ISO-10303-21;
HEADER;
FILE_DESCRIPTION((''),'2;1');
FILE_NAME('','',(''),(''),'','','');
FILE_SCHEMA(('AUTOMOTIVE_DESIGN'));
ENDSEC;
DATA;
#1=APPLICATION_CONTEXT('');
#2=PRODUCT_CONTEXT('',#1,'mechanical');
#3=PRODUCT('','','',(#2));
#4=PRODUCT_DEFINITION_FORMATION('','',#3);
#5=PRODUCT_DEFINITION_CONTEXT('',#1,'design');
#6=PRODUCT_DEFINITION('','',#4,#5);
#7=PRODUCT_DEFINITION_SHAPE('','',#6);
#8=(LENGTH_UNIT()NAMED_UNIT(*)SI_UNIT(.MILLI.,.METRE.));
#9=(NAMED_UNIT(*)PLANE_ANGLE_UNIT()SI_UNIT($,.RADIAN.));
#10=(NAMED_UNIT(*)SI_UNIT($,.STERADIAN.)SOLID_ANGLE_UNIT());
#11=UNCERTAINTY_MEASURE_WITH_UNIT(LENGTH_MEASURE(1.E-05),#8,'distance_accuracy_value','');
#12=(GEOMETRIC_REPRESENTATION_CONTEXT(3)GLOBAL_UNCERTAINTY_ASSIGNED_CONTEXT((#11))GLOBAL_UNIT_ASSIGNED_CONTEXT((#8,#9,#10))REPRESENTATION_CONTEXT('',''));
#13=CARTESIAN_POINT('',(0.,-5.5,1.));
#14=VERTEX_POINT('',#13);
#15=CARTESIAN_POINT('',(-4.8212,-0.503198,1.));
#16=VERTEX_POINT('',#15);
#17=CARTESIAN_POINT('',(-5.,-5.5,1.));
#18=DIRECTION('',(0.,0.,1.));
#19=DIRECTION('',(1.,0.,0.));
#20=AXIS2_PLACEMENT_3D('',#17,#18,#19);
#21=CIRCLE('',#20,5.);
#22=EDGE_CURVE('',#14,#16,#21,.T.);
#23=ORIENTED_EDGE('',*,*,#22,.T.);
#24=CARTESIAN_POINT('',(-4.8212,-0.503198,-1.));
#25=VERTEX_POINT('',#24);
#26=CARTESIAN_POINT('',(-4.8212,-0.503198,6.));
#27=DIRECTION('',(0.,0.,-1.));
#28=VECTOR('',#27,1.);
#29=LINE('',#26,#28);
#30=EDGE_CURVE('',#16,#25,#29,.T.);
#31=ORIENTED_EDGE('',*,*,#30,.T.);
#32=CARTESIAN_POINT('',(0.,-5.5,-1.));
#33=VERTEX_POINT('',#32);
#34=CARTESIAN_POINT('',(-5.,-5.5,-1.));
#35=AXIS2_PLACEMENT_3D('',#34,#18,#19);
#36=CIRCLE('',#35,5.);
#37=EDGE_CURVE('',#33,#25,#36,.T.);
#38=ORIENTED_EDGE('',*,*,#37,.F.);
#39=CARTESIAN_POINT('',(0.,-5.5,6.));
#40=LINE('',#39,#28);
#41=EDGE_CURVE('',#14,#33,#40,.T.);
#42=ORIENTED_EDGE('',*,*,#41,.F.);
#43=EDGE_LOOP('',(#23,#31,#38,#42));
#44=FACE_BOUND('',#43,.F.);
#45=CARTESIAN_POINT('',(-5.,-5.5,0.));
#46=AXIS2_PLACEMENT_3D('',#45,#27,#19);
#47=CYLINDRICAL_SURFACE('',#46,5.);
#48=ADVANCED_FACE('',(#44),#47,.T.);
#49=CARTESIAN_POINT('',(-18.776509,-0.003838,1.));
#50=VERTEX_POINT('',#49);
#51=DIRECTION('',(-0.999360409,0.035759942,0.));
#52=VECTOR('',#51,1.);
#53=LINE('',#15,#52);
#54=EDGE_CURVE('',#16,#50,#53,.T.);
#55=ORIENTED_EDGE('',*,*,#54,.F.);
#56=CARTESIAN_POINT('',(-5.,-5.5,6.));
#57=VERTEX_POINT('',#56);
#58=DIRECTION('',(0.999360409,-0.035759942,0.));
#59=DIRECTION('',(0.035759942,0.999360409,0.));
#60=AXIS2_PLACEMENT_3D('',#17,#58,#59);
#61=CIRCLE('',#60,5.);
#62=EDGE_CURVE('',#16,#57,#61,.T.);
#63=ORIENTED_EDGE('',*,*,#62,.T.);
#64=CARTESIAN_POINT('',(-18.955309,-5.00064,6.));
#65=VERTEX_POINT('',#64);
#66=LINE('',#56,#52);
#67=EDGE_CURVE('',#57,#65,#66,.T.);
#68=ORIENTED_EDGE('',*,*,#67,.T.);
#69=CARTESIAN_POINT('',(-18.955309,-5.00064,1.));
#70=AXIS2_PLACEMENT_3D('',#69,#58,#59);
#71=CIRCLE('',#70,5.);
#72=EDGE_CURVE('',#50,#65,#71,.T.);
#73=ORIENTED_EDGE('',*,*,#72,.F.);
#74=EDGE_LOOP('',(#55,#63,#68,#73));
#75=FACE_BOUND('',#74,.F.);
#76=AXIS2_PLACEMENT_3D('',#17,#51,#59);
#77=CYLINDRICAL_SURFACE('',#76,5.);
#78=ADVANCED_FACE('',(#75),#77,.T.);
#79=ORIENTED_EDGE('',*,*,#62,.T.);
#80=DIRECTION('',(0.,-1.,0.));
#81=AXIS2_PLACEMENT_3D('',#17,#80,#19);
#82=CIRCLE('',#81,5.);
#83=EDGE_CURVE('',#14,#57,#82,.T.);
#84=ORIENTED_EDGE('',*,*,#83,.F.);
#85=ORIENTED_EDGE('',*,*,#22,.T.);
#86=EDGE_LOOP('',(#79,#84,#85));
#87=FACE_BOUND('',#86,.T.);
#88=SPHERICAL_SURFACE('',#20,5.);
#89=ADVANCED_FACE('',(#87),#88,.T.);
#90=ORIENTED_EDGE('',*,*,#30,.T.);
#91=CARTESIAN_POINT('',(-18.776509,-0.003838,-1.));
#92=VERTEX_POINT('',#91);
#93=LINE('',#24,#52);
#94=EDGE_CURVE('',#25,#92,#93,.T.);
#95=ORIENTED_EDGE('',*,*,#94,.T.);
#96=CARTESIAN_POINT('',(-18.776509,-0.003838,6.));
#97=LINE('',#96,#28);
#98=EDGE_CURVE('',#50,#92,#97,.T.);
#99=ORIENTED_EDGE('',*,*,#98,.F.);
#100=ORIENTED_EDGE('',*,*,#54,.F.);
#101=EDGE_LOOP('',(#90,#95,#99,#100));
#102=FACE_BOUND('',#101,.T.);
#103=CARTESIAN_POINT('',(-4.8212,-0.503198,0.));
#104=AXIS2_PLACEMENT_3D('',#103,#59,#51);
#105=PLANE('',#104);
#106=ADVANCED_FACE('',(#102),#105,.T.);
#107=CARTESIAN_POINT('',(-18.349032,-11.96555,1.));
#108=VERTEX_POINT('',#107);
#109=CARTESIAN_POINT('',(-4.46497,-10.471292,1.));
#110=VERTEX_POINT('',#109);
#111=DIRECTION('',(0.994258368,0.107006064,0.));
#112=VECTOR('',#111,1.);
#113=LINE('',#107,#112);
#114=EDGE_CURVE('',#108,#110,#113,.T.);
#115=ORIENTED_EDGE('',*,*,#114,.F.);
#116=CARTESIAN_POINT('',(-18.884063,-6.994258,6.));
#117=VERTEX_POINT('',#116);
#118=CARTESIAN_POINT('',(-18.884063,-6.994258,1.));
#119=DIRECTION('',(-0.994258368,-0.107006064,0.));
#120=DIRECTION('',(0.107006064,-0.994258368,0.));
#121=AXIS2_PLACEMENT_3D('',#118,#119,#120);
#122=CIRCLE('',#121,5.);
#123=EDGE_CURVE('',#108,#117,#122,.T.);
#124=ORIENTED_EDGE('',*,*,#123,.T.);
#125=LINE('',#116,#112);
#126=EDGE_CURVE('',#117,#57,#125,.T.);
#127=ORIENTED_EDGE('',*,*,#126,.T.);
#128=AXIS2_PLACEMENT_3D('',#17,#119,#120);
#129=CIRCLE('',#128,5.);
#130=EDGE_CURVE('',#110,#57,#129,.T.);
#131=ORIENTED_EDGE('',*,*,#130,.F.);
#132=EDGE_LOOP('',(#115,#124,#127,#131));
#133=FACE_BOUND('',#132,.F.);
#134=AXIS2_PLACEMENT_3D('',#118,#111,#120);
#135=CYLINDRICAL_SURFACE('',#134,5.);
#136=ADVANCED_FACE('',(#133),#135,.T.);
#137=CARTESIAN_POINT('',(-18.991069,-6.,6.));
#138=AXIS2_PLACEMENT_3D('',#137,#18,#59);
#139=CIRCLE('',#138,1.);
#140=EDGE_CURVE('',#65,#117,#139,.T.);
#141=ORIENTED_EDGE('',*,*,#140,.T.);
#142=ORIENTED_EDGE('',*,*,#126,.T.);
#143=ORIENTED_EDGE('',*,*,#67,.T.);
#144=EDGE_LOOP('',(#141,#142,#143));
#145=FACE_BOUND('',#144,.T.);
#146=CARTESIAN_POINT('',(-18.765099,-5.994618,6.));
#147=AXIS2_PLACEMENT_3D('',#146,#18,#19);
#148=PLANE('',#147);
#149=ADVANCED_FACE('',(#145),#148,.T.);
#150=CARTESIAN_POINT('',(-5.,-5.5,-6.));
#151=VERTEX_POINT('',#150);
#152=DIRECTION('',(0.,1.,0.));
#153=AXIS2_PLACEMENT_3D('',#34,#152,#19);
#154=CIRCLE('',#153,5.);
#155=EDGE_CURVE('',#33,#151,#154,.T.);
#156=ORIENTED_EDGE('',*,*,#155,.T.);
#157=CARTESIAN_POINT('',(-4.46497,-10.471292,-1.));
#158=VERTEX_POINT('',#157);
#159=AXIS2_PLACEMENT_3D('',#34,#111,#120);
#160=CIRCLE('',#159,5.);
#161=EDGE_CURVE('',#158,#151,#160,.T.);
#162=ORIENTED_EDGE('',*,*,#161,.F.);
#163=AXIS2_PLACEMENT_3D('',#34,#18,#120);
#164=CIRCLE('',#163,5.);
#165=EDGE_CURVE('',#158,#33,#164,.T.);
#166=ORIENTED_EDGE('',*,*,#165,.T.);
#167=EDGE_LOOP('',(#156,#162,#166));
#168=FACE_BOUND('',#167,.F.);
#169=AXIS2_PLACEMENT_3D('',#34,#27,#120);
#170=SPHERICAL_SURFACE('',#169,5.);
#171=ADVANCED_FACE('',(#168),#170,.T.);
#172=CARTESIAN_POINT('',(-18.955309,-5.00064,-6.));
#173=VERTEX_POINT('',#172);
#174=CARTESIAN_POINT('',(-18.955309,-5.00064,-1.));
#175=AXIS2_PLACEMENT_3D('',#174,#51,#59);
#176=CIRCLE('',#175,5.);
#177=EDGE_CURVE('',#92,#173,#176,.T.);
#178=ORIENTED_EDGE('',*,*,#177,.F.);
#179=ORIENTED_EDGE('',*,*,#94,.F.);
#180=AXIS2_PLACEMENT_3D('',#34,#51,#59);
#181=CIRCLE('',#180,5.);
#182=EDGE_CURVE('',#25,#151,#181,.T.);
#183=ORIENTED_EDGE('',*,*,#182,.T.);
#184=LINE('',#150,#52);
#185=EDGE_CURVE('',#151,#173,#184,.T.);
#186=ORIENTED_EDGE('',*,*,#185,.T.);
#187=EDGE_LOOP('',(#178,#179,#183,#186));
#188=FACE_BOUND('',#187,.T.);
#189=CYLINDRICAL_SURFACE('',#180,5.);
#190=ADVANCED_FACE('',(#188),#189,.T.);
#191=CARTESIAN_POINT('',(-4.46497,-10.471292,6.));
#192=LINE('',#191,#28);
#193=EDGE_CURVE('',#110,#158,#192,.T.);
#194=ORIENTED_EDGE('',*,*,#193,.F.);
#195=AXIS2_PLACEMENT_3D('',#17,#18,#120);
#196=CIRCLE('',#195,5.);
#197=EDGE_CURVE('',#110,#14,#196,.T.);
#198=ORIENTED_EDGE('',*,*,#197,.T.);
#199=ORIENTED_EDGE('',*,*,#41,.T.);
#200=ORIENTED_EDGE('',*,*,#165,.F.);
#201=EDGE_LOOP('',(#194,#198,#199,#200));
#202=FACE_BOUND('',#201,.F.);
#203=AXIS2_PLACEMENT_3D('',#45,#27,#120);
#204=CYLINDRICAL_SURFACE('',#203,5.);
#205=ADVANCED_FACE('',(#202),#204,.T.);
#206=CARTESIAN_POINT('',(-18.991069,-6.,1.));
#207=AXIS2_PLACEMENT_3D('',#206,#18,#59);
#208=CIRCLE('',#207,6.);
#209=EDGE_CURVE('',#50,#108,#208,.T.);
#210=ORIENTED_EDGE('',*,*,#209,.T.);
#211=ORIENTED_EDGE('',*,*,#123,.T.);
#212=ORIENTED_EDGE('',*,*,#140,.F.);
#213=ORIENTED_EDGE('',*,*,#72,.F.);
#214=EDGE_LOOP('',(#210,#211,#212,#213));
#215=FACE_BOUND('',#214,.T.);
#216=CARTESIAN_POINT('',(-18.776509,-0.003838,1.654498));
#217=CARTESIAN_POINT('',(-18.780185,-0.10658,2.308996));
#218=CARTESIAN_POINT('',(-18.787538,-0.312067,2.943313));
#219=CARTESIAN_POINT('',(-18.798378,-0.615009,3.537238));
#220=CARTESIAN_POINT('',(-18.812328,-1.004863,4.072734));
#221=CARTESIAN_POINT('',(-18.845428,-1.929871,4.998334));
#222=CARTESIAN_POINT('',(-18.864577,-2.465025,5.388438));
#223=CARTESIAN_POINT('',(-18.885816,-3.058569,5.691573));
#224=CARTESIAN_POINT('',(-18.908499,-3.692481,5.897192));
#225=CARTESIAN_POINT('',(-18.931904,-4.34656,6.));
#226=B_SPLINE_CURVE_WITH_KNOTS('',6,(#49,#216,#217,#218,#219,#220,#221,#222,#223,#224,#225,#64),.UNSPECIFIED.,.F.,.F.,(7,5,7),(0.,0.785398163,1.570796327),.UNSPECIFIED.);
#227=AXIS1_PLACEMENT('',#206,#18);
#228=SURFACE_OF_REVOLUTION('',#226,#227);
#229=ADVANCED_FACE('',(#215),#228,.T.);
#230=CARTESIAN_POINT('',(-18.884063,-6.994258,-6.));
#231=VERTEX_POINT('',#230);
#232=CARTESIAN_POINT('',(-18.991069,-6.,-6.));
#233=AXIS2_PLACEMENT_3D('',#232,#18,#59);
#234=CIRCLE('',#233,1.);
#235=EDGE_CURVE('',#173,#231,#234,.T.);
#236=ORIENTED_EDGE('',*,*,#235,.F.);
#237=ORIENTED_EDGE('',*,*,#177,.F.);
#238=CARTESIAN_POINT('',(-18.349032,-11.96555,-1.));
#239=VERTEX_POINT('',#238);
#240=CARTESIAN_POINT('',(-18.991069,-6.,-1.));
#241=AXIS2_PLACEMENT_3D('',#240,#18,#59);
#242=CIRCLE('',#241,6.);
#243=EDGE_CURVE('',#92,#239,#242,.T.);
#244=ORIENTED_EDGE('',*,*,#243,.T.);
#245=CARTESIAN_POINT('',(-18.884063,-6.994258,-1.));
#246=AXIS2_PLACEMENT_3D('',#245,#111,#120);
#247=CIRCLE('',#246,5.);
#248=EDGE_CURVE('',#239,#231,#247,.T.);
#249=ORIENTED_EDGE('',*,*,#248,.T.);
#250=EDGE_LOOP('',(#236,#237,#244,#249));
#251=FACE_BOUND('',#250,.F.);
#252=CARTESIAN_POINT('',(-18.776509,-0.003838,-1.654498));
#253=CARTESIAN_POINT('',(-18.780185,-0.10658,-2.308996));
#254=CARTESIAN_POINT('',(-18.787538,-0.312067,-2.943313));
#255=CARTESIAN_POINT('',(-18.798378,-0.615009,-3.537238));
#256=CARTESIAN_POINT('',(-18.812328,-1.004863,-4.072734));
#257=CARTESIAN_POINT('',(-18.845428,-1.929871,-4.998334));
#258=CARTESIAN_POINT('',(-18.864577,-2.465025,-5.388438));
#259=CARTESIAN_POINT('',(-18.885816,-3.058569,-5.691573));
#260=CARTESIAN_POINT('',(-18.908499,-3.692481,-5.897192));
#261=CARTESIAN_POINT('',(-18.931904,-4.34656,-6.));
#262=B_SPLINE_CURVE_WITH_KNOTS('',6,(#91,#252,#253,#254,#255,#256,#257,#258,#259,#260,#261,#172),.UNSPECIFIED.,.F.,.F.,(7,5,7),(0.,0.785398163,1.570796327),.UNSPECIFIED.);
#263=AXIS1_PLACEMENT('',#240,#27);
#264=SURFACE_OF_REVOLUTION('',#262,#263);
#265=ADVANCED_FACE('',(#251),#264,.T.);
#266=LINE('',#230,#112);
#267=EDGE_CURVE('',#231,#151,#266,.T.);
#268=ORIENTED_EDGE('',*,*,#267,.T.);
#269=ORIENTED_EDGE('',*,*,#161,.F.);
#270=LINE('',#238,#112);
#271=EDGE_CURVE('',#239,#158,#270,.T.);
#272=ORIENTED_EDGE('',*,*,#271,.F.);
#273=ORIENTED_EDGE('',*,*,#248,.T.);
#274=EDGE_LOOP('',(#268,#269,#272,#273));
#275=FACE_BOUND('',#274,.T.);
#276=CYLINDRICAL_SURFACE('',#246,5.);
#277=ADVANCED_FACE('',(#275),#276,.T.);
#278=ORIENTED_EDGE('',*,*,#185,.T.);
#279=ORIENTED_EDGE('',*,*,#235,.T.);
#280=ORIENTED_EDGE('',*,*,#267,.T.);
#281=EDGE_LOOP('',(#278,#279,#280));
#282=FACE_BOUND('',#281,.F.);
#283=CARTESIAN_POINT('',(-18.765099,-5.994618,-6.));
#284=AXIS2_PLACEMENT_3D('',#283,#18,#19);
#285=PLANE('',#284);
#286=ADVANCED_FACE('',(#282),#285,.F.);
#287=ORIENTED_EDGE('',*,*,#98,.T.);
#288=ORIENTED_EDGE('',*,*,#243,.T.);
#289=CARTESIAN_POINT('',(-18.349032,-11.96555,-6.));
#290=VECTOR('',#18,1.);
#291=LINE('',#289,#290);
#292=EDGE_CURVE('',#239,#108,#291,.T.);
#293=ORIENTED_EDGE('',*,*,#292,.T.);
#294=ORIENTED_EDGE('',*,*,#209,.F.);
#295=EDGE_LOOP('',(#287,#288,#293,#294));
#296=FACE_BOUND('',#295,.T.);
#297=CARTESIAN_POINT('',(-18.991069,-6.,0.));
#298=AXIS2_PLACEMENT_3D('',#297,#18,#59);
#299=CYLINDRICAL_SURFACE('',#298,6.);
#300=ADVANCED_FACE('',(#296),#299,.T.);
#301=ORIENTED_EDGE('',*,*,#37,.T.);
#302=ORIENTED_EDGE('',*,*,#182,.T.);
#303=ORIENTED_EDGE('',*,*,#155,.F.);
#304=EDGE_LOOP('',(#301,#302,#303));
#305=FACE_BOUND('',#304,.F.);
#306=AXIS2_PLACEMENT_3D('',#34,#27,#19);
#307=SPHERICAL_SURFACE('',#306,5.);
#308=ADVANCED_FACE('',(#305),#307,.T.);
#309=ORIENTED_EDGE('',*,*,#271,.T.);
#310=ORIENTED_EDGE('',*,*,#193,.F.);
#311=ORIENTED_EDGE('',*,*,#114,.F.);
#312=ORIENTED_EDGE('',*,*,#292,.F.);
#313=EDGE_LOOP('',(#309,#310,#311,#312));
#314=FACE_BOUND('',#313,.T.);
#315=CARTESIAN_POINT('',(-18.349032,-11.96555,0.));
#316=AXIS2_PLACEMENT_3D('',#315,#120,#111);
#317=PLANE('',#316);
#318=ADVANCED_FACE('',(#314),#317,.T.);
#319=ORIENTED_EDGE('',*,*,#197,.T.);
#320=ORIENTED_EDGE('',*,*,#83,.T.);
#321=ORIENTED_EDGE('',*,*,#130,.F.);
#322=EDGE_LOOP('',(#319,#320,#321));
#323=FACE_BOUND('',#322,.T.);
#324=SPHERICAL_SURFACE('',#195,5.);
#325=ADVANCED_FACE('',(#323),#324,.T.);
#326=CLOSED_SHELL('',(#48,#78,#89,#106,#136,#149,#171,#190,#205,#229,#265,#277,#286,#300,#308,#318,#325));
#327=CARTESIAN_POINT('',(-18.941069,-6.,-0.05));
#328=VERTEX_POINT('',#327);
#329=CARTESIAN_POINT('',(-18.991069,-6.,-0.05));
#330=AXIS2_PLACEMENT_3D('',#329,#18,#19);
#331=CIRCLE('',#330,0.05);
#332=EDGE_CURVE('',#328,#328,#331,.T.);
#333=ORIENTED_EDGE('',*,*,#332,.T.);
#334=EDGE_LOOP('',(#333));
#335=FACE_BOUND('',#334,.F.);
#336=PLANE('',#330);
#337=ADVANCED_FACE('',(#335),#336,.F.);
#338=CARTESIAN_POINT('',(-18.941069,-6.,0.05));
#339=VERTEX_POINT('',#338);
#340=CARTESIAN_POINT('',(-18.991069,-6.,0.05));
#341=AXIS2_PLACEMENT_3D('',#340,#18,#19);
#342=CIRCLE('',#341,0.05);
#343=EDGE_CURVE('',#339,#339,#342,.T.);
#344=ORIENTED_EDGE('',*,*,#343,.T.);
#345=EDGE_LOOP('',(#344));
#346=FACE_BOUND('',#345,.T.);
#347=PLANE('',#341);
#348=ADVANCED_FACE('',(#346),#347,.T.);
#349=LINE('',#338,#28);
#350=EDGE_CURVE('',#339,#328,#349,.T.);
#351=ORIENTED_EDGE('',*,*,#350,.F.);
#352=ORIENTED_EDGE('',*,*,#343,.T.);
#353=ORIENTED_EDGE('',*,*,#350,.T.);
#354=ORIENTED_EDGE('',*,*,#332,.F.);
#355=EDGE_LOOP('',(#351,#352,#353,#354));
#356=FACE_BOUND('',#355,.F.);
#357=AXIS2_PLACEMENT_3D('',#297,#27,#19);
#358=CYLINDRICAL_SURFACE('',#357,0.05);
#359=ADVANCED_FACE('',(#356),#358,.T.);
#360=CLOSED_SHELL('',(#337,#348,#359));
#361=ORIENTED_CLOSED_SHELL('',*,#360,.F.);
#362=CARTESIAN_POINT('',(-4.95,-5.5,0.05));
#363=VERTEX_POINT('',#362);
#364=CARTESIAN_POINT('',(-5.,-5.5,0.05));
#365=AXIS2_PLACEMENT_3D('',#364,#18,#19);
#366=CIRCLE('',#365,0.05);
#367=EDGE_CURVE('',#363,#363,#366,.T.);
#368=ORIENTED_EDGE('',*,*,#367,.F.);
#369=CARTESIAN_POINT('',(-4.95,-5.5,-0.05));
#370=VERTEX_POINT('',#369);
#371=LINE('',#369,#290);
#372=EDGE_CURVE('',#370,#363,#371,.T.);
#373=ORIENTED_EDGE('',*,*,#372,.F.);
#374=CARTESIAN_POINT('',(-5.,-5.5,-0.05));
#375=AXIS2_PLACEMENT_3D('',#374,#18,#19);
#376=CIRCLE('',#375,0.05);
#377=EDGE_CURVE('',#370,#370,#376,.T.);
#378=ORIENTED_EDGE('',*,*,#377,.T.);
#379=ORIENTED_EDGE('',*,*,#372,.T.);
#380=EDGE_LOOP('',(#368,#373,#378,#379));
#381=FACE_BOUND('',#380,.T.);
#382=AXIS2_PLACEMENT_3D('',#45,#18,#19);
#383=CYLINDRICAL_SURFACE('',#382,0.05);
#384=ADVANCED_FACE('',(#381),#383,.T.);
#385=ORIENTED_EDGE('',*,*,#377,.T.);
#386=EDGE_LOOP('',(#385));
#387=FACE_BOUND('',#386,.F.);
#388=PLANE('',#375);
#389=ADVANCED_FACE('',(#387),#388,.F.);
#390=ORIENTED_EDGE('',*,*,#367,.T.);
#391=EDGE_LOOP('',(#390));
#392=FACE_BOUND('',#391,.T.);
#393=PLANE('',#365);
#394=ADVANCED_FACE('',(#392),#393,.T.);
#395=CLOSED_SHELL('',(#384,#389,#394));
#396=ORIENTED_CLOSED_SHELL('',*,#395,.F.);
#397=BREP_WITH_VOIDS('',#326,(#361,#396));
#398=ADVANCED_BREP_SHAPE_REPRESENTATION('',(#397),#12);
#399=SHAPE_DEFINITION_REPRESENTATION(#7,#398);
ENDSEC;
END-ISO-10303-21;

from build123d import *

# Parameters (mm, degrees)
F1_R     = 0.05
F2_DEPTH = 6
F3_DEPTH = 0.05
F4_R     = 5


# Not quite as in the source:
# - a feature names something its author has since deleted; it is built from what else it names


with BuildPart() as f2:
    # F1 (on Top) → F2 (new body, symmetric)
    with BuildSketch(Plane.XY):
        with BuildLine():
            ThreePointArc((-18.3490321939, -11.9655502076), (-14.5272015165, -10.0092257161), (-12.9910685796, -6))
            ThreePointArc((-12.9910685796, -6), (-14.6732359116, -1.8339081802), (-18.7765089299, -0.0038375475))
            ThreePointArc((-18.7765089299, -0.0038375475), (-24.987240828, -6.2142857143), (-18.3490321939, -11.9655502076))
        make_face()
        with Locations((-18.9910685796, -6)):
            Circle(F1_R, mode=Mode.SUBTRACT)
        with BuildLine():
            ThreePointArc((-18.7765089299, -0.0038375475), (-14.6732359116, -1.8339081802), (-12.9910685796, -6))
            ThreePointArc((-12.9910685796, -6), (-14.5272015165, -10.0092257161), (-18.3490321939, -11.9655502076))
            Line((-18.3490321939, -11.9655502076), (-4.4649696785, -10.4712918397))
            ThreePointArc((-4.4649696785, -10.4712918397), (-9.996810207, -5.6785714286), (-4.8212002919, -0.5031979563))
            Line((-4.8212002919, -0.5031979563), (-18.7765089299, -0.0038375475))
        make_face()
        with BuildLine():
            ThreePointArc((0, -5.5), (-1.40180611, -2.0282568169), (-4.8212002919, -0.5031979563))
            ThreePointArc((-4.8212002919, -0.5031979563), (-9.996810207, -5.6785714286), (-4.4649696785, -10.4712918397))
            ThreePointArc((-4.4649696785, -10.4712918397), (-1.2801107807, -8.8410214301), (0, -5.5))
        make_face()
        with Locations((-5, -5.5)):
            Circle(F1_R, mode=Mode.SUBTRACT)
        with Locations((-18.9910685796, -6)):
            Circle(F1_R)
        with Locations((-5, -5.5)):
            Circle(F1_R)
    extrude(amount=F2_DEPTH, both=True)

    # F1 (on Top) → F3 (cut, symmetric)
    with BuildSketch(Plane.XY):
        with Locations((-18.9910685796, -6)):
            Circle(F1_R)
        with Locations((-5, -5.5)):
            Circle(F1_R)
    extrude(amount=F3_DEPTH, both=True, mode=Mode.SUBTRACT)

    # F4
    f4_edges = [f2.edges().sort_by_distance(p)[0] for p in [
        (-24.987241, -6.214286, 6),
        (-11.407001, -11.218421, 6),
        (-0.00319, -5.321429, 6),
        (-11.798855, -0.253518, 6),
        (-24.987241, -6.214286, -6),
        (-11.407001, -11.218421, -6),
        (-0.00319, -5.321429, -6),
        (-11.798855, -0.253518, -6),
    ]]
    fillet(f4_edges, radius=F4_R)


solid = f2.part
